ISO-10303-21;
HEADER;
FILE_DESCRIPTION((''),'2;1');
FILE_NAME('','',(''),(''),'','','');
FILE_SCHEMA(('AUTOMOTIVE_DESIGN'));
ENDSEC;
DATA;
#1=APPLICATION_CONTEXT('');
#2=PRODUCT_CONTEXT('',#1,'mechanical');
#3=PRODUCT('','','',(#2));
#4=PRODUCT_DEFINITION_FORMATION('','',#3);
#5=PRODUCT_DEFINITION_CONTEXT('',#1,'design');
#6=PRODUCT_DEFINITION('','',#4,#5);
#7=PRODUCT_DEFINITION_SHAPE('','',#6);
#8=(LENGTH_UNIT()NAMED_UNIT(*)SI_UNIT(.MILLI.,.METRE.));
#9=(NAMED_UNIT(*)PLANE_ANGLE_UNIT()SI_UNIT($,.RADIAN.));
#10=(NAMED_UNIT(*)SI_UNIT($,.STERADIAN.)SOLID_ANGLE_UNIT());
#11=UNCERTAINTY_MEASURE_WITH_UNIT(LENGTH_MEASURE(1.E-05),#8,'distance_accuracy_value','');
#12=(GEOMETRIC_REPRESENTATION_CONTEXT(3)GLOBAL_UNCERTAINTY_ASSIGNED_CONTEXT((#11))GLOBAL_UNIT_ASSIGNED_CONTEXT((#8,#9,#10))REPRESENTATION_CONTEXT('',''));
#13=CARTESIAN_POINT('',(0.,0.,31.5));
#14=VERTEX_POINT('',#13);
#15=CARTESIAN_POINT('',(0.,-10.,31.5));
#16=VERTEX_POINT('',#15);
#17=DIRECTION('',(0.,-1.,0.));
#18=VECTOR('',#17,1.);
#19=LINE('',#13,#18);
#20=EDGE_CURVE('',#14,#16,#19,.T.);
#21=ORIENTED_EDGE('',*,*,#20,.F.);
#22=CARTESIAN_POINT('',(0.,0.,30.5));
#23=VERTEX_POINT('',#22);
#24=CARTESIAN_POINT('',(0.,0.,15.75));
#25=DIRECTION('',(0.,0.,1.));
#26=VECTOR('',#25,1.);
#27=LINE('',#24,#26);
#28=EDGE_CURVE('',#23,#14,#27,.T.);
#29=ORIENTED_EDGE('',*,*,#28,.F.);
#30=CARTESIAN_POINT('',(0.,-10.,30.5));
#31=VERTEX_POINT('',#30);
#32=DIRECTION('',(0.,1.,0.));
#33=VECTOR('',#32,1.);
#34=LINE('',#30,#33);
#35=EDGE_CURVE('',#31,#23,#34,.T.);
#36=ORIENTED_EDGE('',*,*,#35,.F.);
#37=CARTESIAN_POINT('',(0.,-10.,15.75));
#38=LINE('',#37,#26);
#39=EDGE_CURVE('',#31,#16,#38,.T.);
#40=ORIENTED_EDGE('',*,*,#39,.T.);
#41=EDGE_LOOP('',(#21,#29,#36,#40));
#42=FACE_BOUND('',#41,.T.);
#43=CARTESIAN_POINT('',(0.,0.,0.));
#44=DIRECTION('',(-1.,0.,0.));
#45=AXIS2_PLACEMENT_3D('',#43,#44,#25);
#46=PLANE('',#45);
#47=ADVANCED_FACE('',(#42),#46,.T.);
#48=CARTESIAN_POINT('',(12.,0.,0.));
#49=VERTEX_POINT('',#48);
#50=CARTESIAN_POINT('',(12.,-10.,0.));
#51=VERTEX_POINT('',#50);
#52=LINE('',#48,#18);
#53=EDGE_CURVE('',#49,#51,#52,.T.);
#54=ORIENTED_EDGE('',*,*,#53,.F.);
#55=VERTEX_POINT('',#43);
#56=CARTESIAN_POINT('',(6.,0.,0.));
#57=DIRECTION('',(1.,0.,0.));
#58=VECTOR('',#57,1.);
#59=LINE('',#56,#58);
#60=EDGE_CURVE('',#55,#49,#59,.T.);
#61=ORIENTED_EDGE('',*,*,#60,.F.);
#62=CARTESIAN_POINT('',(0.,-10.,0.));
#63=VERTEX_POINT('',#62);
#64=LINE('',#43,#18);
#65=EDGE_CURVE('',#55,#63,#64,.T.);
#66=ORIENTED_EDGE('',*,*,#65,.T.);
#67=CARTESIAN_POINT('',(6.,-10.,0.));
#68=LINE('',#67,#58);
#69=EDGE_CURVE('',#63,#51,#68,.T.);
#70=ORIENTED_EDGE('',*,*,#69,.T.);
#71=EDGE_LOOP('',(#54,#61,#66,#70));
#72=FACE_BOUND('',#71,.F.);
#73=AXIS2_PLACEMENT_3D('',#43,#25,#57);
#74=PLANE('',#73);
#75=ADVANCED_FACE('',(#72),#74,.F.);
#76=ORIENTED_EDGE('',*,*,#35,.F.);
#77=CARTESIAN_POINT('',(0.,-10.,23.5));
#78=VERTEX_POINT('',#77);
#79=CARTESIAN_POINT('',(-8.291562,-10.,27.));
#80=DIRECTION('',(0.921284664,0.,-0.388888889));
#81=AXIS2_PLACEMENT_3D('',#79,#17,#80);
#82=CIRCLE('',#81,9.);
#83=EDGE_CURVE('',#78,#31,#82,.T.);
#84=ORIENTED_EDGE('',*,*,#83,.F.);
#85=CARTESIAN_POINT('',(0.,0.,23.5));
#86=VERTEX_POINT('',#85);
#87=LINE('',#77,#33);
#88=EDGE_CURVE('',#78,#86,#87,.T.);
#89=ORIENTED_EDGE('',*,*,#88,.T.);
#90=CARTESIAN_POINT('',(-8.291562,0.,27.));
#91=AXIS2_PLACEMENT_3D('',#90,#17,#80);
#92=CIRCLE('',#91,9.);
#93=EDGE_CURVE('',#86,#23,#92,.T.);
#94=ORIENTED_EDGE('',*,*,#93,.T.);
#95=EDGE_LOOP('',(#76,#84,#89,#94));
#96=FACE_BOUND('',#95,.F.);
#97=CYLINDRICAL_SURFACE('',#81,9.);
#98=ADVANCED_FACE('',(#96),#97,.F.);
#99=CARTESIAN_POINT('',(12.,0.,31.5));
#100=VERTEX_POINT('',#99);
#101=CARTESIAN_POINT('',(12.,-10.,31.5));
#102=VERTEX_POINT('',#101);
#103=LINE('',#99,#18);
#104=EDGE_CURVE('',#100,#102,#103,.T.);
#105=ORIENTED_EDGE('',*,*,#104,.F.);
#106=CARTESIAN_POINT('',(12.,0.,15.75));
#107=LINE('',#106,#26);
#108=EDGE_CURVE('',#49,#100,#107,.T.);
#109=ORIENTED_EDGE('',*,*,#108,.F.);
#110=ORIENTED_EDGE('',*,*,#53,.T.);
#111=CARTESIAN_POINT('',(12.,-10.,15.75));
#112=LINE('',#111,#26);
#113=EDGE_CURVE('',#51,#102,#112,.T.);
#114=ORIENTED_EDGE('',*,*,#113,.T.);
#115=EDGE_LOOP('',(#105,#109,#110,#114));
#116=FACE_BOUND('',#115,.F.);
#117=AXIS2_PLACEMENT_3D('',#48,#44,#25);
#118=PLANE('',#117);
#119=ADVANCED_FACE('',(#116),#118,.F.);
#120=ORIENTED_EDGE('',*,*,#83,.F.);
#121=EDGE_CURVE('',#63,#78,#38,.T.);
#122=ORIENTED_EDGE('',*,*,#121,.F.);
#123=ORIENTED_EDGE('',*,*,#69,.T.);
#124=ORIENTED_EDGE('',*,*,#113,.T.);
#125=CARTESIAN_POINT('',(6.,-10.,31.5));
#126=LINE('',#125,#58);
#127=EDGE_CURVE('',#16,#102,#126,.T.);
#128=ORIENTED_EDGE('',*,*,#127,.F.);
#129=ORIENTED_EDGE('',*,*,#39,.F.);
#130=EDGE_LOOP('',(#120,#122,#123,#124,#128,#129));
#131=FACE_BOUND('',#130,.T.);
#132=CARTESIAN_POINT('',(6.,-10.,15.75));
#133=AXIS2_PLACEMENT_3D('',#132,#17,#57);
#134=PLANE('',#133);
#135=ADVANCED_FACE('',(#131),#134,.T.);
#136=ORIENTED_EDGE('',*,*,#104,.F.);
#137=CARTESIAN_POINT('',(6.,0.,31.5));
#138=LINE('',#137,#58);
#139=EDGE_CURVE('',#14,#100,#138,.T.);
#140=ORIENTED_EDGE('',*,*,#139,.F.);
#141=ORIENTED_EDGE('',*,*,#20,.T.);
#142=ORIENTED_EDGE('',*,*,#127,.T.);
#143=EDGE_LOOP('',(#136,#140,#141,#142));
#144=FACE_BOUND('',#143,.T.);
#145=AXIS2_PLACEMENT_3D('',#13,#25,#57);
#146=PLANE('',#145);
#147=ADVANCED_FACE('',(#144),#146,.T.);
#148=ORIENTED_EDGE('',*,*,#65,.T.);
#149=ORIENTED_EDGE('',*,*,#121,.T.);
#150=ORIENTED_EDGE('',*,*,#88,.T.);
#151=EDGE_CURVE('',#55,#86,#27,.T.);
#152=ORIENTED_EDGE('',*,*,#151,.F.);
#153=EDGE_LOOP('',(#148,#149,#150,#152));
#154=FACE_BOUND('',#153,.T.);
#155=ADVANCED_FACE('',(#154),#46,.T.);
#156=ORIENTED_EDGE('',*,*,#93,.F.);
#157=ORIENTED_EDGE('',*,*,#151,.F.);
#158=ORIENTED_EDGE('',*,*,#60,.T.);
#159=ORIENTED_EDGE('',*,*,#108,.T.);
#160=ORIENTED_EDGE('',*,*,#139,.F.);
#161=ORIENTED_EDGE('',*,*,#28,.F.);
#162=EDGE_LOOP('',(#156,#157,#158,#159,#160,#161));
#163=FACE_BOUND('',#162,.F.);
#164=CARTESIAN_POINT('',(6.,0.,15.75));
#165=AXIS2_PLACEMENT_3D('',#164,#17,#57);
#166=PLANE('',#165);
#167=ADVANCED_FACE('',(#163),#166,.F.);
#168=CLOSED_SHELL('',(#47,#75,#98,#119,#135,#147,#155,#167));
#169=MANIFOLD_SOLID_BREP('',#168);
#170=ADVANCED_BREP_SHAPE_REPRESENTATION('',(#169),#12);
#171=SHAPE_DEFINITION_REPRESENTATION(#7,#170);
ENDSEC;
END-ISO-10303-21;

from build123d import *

# Parameters (mm, degrees)
F0_W     = 12
F0_H     = 31.5
F1_DEPTH = 10
F3_DEPTH = 10.001


# Not quite as in the source:
# - a feature names something its author has since deleted; it is built from what else it names


with BuildPart() as f1:
    # F0 (on Front) → F1 (new body)
    with BuildSketch(Plane.XZ):
        with Locations((6, 15.75)):
            Rectangle(F0_W, F0_H)
    extrude(amount=F1_DEPTH)

    # F2 (on face) → F3 (cut, through all)
    with BuildSketch(Plane.XZ.offset(10)):
        with BuildLine():
            Line((0, 30.5), (0, 23.5))
            ThreePointArc((0, 23.5), (0.7084380241, 27), (0, 30.5))
        make_face()
    extrude(amount=-F3_DEPTH, mode=Mode.SUBTRACT)


solid = f1.part
